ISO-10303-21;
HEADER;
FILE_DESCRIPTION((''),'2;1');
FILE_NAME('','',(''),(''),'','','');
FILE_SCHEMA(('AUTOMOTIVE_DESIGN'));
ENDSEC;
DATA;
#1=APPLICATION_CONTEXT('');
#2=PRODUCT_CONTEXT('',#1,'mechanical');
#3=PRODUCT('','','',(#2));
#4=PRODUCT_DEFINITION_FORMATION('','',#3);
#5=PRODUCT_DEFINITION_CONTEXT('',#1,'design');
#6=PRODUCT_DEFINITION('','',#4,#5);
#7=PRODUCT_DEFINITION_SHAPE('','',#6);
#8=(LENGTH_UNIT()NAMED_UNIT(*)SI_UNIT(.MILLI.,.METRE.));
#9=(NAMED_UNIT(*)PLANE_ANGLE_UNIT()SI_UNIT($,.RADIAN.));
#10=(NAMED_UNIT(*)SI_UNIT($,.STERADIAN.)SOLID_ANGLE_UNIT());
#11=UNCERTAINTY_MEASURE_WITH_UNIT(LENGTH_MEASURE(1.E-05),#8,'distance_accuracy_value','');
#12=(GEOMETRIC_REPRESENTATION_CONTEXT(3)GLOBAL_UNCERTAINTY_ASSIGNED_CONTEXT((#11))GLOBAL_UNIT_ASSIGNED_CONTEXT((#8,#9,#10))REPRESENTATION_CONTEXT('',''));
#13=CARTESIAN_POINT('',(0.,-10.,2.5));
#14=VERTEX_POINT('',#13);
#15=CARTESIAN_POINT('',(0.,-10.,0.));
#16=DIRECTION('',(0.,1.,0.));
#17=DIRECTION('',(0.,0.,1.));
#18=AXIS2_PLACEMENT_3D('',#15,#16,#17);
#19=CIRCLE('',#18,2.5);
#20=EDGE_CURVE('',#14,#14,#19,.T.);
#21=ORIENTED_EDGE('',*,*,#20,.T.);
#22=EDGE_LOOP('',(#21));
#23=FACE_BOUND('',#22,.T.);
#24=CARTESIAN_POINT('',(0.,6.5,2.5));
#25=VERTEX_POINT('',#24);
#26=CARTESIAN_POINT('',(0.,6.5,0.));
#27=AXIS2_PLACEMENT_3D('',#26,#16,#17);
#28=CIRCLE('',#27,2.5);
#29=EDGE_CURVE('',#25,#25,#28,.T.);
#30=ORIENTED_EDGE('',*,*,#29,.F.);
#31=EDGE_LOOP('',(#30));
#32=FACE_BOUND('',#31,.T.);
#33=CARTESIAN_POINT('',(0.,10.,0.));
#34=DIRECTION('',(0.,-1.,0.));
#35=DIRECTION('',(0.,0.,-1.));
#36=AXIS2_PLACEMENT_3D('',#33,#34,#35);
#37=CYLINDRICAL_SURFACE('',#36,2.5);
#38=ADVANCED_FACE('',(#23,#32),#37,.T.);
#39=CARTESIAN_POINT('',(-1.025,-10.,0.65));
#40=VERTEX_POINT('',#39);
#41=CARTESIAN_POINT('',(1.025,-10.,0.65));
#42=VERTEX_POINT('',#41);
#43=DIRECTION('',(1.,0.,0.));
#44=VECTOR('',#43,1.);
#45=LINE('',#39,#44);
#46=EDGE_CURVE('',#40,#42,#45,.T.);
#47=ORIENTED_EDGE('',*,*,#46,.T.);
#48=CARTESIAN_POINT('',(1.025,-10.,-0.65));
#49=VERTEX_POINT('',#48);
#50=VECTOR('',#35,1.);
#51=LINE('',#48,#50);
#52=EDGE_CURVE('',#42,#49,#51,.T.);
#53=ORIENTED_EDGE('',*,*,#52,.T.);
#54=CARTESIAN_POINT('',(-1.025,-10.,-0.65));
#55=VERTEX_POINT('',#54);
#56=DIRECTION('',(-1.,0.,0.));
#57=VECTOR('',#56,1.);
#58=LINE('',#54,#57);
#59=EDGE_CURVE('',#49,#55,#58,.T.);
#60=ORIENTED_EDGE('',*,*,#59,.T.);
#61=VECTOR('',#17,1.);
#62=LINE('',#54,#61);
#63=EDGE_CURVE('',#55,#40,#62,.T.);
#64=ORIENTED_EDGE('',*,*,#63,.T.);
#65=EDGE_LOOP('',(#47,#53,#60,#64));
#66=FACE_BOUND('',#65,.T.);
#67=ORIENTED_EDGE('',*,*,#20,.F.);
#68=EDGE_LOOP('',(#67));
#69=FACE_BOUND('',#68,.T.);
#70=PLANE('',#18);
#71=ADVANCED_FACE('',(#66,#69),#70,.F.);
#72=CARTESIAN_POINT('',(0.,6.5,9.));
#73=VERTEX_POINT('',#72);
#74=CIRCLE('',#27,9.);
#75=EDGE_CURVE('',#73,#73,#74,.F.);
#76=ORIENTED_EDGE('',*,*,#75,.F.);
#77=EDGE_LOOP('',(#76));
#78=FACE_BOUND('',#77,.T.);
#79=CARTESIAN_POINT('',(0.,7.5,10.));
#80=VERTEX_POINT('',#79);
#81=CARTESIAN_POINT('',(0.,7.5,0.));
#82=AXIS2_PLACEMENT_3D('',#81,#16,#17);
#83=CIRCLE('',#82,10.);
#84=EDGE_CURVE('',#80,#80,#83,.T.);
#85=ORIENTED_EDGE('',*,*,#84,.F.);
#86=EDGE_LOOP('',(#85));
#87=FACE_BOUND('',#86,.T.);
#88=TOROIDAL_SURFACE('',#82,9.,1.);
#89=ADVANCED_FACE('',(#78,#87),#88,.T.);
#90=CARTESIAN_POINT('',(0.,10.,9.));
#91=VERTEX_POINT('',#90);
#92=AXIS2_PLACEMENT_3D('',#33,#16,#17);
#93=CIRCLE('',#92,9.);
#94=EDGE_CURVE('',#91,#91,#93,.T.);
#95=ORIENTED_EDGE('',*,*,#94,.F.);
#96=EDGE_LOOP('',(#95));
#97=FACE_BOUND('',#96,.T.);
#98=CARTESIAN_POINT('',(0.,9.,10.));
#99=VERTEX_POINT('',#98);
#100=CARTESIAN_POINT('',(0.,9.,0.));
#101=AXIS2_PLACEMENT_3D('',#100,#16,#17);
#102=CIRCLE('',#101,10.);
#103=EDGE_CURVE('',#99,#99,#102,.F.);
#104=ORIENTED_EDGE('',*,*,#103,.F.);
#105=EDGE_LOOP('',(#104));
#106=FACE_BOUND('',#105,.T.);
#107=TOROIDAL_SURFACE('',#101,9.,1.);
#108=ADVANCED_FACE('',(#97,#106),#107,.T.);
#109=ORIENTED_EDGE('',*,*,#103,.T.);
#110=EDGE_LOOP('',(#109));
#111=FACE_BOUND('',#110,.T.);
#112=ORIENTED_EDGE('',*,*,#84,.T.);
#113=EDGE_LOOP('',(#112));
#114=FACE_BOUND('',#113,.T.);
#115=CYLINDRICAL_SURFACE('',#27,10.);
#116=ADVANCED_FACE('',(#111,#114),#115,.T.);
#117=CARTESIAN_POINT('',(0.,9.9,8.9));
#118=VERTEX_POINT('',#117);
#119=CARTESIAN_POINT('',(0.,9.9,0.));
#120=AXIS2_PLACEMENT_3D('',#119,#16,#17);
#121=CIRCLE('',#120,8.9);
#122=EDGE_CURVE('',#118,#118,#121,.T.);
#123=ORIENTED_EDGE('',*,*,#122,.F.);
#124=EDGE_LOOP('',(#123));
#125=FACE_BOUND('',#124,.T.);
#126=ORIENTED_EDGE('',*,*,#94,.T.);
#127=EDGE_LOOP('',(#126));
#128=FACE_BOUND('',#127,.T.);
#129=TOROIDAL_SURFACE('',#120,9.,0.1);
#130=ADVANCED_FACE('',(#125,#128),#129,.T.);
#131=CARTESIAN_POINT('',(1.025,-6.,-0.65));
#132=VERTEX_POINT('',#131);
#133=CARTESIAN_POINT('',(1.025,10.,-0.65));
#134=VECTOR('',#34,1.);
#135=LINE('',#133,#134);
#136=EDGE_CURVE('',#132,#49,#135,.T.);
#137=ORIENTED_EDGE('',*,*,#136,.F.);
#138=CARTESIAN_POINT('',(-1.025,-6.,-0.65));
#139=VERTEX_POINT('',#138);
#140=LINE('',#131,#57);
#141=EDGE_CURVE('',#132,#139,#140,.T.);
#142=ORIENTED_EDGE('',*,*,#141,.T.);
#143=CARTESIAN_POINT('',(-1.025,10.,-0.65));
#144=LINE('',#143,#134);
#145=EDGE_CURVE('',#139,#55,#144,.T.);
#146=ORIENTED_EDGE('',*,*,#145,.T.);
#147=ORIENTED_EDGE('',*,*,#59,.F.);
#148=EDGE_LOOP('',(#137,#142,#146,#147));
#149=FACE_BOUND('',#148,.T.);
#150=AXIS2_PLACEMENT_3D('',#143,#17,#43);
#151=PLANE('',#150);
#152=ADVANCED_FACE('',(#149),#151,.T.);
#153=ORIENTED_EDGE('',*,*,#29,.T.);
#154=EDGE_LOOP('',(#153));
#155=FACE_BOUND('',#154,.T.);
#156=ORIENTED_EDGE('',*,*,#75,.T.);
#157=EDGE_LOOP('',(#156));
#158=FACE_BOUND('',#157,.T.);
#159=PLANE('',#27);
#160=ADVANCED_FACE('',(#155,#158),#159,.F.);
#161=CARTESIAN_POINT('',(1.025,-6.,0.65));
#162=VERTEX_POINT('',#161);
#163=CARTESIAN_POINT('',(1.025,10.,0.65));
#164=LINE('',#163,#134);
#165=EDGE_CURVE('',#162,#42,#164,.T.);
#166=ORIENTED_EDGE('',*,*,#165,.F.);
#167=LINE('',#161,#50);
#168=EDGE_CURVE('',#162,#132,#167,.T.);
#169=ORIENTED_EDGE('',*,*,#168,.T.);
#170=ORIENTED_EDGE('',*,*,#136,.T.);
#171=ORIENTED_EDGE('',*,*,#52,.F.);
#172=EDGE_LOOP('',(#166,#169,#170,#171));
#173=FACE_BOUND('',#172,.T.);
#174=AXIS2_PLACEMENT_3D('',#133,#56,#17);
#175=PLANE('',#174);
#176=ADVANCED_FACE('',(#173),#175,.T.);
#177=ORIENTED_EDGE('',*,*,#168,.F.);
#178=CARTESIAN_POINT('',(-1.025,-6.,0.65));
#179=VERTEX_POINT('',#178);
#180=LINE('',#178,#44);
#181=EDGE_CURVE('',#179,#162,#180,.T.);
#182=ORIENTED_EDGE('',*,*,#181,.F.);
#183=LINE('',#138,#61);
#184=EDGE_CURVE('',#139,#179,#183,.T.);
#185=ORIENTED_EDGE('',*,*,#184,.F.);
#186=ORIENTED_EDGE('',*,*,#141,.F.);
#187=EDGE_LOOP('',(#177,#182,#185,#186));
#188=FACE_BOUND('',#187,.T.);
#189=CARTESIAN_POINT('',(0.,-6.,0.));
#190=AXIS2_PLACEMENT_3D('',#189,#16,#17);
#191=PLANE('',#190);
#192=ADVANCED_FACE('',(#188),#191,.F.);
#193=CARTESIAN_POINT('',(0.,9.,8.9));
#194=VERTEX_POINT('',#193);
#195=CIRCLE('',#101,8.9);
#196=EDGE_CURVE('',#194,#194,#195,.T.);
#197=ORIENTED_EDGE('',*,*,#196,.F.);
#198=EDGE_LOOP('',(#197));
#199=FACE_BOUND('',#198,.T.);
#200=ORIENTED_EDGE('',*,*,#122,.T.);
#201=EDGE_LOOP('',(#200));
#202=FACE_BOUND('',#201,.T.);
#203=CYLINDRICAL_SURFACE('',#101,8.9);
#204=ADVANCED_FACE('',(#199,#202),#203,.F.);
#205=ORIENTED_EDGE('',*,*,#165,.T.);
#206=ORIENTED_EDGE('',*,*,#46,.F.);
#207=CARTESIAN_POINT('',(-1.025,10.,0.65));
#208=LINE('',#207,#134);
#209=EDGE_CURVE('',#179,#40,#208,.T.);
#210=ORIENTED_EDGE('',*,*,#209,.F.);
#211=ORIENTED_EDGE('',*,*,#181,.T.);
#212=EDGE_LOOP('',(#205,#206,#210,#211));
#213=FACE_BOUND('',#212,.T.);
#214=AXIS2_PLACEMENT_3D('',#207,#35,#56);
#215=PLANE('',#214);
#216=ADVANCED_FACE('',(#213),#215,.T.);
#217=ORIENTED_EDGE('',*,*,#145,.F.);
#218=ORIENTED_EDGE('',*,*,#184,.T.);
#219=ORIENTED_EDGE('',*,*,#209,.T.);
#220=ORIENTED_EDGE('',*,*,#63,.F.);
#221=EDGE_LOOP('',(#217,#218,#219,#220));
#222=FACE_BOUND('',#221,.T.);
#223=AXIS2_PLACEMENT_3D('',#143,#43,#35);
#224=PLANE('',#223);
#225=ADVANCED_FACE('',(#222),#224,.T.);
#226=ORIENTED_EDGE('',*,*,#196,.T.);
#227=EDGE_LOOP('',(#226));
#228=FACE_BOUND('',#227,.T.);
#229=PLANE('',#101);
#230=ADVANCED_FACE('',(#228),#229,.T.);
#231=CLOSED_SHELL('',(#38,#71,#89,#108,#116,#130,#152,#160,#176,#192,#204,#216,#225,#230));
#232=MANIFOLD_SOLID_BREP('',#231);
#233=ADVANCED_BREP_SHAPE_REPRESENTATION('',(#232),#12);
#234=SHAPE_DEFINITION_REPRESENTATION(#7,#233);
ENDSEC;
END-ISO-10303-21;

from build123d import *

# Parameters (mm, degrees)
SKETCH2_R           = 2.5
SKETCH2_W           = 2.05
SKETCH2_H           = 1.3
BOSS_EXTRUDE1_DEPTH = 10
FILLET1_R           = 1
SKETCH3_W           = 2.05
SKETCH3_H           = 1.3
BOSS_EXTRUDE5_DEPTH = 16
SKETCH4_R           = 10
THUMB_STICK_DEPTH   = 3.5
FILLET2_R           = 1
FILLET3_R           = 1
SKETCH4_4_R         = 8.9
CUT_EXTRUDE1_DEPTH  = 1
FILLET5_R           = 0.1


with BuildPart() as part:
    # Sketch2 → Boss-Extrude1 (new, symmetric)
    with BuildSketch(Plane(origin=(0, 0, 0), x_dir=(1, 0, 0), z_dir=(0, 1, 0))):
        with Locations(Location((0, 0, 0), (0, 0, 270))):
            Circle(SKETCH2_R)
        Rectangle(SKETCH2_W, SKETCH2_H, mode=Mode.SUBTRACT)
    extrude(amount=BOSS_EXTRUDE1_DEPTH, both=True)

    # Fillet1
    fillet1_edges = [part.edges().sort_by_distance(p)[0] for p in [
        (0, 10, -2.5),
    ]]
    fillet(fillet1_edges, radius=FILLET1_R)

    # Sketch3 → Boss-Extrude5 (add)
    with BuildSketch(Plane(origin=(0, 10, 0), x_dir=(1, 0, 0), z_dir=(0, 1, 0))):
        Rectangle(SKETCH3_W, SKETCH3_H)
    extrude(amount=-BOSS_EXTRUDE5_DEPTH)

    # Sketch4 → Thumb Stick (add)
    with BuildSketch(Plane(origin=(0, 10, 0), x_dir=(1, 0, 0), z_dir=(0, 1, 0))):
        with Locations(Location((0, 0, 0), (0, 0, 270))):
            Circle(SKETCH4_R)
    extrude(amount=-THUMB_STICK_DEPTH)

    # Fillet2
    fillet2_edges = [part.edges().sort_by_distance(p)[0] for p in [
        (0, 6.5, -10),
    ]]
    fillet(fillet2_edges, radius=FILLET2_R)

    # Fillet3
    fillet3_edges = [part.edges().sort_by_distance(p)[0] for p in [
        (0, 10, -10),
    ]]
    fillet(fillet3_edges, radius=FILLET3_R)

    # Sketch4<4> → Cut-Extrude1 (cut)
    with BuildSketch(Plane(origin=(0, 10, 0), x_dir=(1, 0, 0), z_dir=(0, 1, 0))):
        with Locations(Location((0, 0, 0), (0, 0, 270))):
            Circle(SKETCH4_4_R)
    extrude(amount=-CUT_EXTRUDE1_DEPTH, mode=Mode.SUBTRACT)

    # Fillet5
    fillet5_edges = [part.edges().sort_by_distance(p)[0] for p in [
        (0, 10, -8.9),
    ]]
    fillet(fillet5_edges, radius=FILLET5_R - 0.0001)  # a hair under: the kernel refuses the full size


solid = part.part
